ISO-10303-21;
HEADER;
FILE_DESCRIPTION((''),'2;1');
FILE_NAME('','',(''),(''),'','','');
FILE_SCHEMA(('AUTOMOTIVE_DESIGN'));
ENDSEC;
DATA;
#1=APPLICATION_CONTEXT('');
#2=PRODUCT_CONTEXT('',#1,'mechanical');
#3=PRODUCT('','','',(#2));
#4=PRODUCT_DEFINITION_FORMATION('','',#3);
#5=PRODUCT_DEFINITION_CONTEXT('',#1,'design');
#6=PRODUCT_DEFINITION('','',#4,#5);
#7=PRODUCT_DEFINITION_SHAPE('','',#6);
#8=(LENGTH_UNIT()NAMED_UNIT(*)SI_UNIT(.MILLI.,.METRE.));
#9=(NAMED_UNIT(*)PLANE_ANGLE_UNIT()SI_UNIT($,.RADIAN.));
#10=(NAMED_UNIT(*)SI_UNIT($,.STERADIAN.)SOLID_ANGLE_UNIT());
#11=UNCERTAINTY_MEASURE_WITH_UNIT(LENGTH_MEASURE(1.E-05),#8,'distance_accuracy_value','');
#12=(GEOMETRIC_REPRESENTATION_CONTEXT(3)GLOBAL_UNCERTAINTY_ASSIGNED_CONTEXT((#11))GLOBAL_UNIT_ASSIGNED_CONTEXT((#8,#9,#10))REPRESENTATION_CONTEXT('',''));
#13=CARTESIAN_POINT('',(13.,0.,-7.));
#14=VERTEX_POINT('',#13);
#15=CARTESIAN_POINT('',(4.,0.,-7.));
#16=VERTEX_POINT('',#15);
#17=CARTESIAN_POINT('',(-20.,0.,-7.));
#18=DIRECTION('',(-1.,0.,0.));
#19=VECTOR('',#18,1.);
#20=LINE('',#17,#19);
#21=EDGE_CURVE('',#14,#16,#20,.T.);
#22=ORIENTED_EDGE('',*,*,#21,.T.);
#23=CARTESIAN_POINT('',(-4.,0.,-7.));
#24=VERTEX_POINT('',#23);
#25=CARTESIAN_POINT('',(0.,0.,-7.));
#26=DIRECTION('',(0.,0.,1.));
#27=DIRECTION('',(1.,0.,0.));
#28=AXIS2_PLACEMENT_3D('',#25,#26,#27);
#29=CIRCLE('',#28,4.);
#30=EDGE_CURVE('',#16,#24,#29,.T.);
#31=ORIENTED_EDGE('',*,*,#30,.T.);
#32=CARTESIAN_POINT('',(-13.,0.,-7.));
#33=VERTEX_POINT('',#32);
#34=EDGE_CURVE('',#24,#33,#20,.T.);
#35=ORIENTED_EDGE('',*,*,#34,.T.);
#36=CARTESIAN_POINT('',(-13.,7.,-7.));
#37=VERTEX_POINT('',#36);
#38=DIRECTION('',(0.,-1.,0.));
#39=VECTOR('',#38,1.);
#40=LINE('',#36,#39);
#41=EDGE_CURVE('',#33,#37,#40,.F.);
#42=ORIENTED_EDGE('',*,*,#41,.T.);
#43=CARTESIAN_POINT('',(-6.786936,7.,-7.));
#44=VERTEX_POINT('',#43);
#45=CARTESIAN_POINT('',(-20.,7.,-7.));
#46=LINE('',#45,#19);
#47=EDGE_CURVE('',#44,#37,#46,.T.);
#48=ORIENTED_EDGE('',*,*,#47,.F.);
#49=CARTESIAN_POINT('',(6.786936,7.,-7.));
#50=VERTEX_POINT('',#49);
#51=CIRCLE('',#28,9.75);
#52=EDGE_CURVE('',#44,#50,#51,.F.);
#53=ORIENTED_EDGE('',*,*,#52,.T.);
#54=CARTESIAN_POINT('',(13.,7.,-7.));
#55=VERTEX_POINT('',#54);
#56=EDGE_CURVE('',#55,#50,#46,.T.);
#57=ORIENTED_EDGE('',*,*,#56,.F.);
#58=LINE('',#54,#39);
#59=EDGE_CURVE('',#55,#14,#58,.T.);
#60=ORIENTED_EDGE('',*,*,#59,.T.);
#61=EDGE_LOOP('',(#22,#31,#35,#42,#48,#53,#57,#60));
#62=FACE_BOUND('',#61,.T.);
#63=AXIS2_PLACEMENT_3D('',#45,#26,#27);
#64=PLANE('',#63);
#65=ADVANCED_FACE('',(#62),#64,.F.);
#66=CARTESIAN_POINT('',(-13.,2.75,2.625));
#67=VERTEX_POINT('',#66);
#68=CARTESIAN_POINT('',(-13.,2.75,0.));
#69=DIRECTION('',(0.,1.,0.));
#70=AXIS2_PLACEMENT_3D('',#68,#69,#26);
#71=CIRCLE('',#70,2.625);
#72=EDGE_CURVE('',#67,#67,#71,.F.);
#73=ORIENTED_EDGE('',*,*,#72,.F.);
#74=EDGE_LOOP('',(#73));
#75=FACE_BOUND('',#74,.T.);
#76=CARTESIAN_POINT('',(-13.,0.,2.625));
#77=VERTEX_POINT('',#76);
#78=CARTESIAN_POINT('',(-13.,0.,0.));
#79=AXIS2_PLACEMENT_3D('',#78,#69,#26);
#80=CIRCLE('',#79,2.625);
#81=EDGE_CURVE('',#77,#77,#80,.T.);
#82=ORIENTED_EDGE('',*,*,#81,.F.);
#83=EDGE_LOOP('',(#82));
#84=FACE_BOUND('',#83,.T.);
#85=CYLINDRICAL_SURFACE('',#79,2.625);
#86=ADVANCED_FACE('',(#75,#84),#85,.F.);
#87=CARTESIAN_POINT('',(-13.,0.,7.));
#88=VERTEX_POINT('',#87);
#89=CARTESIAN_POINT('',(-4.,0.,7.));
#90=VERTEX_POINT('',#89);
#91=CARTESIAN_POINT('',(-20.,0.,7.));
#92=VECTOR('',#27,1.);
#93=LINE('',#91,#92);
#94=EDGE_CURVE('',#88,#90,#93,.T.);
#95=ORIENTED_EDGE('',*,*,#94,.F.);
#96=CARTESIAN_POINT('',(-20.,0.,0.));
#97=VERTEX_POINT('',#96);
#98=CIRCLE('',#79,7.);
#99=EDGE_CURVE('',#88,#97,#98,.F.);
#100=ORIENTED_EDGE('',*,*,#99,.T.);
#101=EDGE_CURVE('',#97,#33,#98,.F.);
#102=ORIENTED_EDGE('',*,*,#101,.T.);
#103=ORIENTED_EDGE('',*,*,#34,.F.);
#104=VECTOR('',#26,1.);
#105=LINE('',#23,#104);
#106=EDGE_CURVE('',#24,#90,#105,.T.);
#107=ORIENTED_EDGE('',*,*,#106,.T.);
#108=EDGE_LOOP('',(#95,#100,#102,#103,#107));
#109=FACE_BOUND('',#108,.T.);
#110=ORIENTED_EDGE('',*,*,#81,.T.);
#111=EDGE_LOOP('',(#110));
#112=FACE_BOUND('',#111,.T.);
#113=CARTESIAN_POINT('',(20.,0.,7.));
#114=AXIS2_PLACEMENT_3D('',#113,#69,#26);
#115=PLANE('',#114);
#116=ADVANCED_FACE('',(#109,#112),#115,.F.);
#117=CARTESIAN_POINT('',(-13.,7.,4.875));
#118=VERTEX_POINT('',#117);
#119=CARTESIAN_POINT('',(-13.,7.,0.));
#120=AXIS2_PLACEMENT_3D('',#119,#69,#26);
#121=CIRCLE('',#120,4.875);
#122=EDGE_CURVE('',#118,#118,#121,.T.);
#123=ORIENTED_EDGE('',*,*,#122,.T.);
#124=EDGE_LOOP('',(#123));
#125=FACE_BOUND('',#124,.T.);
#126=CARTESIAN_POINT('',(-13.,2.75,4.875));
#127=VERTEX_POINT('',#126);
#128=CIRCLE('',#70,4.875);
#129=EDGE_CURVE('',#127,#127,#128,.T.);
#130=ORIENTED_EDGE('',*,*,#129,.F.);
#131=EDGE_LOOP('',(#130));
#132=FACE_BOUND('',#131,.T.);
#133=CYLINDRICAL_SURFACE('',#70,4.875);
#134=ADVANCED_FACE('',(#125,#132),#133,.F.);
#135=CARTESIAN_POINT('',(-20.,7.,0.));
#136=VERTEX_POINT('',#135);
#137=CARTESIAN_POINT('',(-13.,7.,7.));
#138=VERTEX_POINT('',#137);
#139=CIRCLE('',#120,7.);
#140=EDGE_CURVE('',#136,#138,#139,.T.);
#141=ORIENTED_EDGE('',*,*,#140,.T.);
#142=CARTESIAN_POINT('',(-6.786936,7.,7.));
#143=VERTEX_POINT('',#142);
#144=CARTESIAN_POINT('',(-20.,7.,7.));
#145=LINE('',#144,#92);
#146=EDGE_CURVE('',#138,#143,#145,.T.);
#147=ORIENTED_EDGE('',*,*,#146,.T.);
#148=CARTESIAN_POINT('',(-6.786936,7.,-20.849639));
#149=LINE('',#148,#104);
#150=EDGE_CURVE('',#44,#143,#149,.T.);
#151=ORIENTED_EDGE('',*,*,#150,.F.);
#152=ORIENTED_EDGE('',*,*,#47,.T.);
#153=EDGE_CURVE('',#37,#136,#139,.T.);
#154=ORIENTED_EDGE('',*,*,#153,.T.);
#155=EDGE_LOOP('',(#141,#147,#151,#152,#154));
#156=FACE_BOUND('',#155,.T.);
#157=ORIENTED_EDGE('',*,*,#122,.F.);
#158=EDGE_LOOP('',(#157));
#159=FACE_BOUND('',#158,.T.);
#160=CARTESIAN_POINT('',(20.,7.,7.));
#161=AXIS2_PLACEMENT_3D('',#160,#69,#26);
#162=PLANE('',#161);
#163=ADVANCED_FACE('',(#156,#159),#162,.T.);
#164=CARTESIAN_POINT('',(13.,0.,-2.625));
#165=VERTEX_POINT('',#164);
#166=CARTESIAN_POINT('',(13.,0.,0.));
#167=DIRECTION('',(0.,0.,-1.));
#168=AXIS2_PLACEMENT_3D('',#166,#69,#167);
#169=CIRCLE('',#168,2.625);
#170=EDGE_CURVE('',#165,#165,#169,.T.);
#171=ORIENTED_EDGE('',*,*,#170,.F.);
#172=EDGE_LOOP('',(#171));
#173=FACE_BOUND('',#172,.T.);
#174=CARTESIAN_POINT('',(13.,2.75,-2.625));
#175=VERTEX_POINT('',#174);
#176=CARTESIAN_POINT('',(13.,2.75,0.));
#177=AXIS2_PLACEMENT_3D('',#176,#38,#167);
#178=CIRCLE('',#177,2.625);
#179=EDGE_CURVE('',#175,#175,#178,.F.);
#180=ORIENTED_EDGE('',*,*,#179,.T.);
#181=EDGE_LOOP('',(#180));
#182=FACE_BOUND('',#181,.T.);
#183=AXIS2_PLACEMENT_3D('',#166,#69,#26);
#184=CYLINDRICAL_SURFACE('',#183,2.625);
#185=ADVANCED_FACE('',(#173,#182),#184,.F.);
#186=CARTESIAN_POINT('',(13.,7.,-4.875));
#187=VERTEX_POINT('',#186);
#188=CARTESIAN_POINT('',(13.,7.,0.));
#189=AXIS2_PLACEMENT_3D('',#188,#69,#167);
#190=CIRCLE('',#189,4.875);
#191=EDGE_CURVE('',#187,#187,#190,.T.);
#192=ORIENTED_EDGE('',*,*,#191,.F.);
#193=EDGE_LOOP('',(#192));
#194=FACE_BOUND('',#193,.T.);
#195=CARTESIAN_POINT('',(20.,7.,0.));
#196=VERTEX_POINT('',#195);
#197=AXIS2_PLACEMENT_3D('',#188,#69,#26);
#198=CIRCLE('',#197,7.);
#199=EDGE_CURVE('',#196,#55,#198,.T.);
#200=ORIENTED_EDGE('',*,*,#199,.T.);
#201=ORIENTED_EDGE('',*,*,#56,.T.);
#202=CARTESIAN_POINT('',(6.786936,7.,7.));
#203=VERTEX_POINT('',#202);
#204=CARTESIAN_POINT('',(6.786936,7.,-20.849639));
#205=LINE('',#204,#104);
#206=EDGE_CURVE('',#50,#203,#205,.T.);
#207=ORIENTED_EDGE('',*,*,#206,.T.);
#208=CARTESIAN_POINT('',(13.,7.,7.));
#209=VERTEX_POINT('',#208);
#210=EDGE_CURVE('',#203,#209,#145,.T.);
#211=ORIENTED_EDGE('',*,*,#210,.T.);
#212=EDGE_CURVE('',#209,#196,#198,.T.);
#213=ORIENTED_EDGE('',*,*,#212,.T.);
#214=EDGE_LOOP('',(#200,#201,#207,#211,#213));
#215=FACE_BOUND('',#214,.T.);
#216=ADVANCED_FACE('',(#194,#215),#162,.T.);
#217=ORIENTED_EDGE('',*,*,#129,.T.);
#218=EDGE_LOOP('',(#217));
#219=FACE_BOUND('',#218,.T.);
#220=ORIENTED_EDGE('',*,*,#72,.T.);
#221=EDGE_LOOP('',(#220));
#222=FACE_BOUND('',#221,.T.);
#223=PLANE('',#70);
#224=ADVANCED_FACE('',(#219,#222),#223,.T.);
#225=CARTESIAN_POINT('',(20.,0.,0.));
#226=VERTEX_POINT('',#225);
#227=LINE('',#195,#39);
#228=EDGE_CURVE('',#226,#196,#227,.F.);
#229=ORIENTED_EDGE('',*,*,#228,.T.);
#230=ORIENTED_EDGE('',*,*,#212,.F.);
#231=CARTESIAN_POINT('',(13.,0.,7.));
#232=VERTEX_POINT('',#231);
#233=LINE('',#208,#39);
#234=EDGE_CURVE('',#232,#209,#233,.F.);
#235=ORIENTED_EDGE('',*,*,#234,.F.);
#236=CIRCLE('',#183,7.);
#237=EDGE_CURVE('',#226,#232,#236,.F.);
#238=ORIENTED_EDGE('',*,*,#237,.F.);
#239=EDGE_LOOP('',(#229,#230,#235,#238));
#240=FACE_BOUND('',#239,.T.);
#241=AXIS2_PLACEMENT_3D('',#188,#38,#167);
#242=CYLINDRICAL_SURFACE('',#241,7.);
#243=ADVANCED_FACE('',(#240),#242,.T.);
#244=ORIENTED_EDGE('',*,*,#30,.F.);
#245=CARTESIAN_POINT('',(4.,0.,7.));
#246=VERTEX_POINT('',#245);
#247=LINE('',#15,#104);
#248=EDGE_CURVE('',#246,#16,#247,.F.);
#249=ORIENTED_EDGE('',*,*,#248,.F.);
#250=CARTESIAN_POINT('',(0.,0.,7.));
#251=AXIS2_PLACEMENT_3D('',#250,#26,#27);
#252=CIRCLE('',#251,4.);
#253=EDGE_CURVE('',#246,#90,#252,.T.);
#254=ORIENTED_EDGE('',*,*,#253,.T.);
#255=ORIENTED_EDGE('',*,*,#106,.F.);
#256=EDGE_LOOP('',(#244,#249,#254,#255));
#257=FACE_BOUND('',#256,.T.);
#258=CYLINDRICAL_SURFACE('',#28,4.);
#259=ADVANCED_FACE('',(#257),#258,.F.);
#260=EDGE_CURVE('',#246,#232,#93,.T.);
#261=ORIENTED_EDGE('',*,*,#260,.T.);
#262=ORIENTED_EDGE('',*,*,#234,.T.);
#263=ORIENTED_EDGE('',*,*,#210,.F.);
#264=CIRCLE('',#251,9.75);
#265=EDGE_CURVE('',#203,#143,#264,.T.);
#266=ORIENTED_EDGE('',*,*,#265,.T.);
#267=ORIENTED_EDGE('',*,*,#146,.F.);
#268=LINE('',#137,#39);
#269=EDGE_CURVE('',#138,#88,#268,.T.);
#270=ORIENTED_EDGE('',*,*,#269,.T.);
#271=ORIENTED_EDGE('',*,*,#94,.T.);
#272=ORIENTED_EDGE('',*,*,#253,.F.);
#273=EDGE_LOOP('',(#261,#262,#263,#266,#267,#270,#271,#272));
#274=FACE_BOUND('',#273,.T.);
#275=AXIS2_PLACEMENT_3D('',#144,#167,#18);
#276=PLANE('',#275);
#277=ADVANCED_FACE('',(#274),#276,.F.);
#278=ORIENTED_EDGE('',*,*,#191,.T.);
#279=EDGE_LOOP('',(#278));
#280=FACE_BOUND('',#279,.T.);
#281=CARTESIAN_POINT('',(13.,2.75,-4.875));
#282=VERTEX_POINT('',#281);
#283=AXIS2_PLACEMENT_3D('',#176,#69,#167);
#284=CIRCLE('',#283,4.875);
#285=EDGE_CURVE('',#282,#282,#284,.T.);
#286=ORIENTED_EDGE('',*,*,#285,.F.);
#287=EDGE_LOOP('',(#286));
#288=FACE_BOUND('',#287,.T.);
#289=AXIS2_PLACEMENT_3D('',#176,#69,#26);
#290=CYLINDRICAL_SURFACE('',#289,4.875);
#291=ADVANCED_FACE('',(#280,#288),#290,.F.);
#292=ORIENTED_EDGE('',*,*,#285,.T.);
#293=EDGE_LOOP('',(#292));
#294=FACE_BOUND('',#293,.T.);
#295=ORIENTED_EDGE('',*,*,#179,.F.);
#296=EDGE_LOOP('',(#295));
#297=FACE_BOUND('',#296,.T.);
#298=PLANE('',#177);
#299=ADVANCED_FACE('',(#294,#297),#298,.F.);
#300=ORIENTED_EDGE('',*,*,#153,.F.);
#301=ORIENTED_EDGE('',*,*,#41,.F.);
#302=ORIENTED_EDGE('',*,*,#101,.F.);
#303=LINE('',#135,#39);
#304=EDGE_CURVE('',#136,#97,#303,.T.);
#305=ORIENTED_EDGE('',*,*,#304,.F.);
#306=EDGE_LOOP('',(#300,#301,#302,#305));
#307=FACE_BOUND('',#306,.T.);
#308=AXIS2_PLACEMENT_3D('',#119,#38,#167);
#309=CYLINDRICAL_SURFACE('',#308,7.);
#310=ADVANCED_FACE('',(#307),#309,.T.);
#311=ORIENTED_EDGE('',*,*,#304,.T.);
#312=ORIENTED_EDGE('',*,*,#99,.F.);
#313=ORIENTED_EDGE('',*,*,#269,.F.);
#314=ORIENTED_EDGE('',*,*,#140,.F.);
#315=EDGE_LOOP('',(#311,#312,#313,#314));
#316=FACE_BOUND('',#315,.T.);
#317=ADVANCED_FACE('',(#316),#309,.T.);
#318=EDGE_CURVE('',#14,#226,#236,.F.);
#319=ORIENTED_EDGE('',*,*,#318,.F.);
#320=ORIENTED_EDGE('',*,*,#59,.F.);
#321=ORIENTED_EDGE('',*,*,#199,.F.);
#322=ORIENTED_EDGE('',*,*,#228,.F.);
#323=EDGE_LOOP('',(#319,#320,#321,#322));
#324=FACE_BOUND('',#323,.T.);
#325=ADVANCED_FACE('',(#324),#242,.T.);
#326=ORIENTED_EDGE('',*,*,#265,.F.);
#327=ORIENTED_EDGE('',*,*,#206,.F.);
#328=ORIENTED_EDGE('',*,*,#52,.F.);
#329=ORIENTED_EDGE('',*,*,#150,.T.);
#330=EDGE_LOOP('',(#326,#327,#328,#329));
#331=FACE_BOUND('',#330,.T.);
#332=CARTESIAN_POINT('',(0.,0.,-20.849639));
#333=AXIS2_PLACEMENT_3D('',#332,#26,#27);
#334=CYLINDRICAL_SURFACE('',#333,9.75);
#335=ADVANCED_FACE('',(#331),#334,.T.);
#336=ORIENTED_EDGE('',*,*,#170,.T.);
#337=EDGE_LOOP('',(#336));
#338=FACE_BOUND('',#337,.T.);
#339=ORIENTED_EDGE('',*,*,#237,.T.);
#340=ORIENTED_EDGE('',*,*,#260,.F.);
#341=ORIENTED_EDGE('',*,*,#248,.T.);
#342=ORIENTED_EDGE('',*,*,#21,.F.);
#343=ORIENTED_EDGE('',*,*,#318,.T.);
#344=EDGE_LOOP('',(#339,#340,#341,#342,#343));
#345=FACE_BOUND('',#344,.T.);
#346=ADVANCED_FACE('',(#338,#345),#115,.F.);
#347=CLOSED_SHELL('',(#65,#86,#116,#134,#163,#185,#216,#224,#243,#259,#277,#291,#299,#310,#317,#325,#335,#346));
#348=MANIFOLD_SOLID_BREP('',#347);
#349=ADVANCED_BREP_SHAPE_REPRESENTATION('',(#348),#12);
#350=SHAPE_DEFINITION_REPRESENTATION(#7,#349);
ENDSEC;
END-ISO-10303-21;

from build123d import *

# Parameters (mm, degrees)
SKETCH1_W           = 40
SKETCH1_H           = 14
BOSS_EXTRUDE1_DEPTH = 7
FILLET1_R           = 7
SKETCH2_R           = 2.625
CUT_EXTRUDE1_DEPTH  = 23.315913604
SKETCH3_R           = 4.875
CUT_EXTRUDE2_DEPTH  = 4.25
BOSS_EXTRUDE2_DEPTH = 14
SKETCH5_R           = 4
CUT_EXTRUDE3_DEPTH  = 27.288067635


with BuildPart() as part:
    # Sketch1 → Boss-Extrude1 (new body)
    with BuildSketch(Plane(origin=(0, 0, 0), x_dir=(1, 0, 0), z_dir=(0, 1, 0))):
        Rectangle(SKETCH1_W, SKETCH1_H)
    extrude(amount=BOSS_EXTRUDE1_DEPTH)

    # Fillet1
    fillet1_edges = [part.edges().sort_by_distance(p)[0] for p in [
        (-20, 3.5, 7),
        (20, 3.5, 7),
        (20, 3.5, -7),
        (-20, 3.5, -7),
    ]]
    fillet(fillet1_edges, radius=FILLET1_R - 0.0001)  # a hair under: the kernel refuses the full size

    # Sketch2 → Cut-Extrude1 (cut, through all)
    with BuildSketch(Plane(origin=(0, 7, 0), x_dir=(1, 0, 0), z_dir=(0, 1, 0))):
        with Locations(Location((-13, 0, 0), (0, 0, 270))):
            Circle(SKETCH2_R)
        with Locations(Location((13, 0, 0), (0, 0, 90))):
            Circle(SKETCH2_R)
    extrude(amount=-CUT_EXTRUDE1_DEPTH, mode=Mode.SUBTRACT)

    # Sketch3 → Cut-Extrude2 (cut)
    with BuildSketch(Plane(origin=(0, 7, 0), x_dir=(1, 0, 0), z_dir=(0, 1, 0))):
        with Locations(Location((-13, 0, 0), (0, 0, 270))):
            Circle(SKETCH3_R)
        with Locations(Location((13, 0, 0), (0, 0, 90))):
            Circle(SKETCH3_R)
    extrude(amount=-CUT_EXTRUDE2_DEPTH, mode=Mode.SUBTRACT)

    # Sketch4 → Boss-Extrude2 (add)
    with BuildSketch(Plane.XY.offset(7)):
        with BuildLine():
            Line((6.78693598, 7), (-6.78693598, 7))
            ThreePointArc((-6.78693598, 7), (0, 9.75), (6.78693598, 7))
        make_face()
    extrude(amount=-BOSS_EXTRUDE2_DEPTH)

    # Sketch5 → Cut-Extrude3 (cut, through all)
    with BuildSketch(Plane.XY.offset(7)):
        Circle(SKETCH5_R)
    extrude(amount=-CUT_EXTRUDE3_DEPTH, mode=Mode.SUBTRACT)


solid = part.part
